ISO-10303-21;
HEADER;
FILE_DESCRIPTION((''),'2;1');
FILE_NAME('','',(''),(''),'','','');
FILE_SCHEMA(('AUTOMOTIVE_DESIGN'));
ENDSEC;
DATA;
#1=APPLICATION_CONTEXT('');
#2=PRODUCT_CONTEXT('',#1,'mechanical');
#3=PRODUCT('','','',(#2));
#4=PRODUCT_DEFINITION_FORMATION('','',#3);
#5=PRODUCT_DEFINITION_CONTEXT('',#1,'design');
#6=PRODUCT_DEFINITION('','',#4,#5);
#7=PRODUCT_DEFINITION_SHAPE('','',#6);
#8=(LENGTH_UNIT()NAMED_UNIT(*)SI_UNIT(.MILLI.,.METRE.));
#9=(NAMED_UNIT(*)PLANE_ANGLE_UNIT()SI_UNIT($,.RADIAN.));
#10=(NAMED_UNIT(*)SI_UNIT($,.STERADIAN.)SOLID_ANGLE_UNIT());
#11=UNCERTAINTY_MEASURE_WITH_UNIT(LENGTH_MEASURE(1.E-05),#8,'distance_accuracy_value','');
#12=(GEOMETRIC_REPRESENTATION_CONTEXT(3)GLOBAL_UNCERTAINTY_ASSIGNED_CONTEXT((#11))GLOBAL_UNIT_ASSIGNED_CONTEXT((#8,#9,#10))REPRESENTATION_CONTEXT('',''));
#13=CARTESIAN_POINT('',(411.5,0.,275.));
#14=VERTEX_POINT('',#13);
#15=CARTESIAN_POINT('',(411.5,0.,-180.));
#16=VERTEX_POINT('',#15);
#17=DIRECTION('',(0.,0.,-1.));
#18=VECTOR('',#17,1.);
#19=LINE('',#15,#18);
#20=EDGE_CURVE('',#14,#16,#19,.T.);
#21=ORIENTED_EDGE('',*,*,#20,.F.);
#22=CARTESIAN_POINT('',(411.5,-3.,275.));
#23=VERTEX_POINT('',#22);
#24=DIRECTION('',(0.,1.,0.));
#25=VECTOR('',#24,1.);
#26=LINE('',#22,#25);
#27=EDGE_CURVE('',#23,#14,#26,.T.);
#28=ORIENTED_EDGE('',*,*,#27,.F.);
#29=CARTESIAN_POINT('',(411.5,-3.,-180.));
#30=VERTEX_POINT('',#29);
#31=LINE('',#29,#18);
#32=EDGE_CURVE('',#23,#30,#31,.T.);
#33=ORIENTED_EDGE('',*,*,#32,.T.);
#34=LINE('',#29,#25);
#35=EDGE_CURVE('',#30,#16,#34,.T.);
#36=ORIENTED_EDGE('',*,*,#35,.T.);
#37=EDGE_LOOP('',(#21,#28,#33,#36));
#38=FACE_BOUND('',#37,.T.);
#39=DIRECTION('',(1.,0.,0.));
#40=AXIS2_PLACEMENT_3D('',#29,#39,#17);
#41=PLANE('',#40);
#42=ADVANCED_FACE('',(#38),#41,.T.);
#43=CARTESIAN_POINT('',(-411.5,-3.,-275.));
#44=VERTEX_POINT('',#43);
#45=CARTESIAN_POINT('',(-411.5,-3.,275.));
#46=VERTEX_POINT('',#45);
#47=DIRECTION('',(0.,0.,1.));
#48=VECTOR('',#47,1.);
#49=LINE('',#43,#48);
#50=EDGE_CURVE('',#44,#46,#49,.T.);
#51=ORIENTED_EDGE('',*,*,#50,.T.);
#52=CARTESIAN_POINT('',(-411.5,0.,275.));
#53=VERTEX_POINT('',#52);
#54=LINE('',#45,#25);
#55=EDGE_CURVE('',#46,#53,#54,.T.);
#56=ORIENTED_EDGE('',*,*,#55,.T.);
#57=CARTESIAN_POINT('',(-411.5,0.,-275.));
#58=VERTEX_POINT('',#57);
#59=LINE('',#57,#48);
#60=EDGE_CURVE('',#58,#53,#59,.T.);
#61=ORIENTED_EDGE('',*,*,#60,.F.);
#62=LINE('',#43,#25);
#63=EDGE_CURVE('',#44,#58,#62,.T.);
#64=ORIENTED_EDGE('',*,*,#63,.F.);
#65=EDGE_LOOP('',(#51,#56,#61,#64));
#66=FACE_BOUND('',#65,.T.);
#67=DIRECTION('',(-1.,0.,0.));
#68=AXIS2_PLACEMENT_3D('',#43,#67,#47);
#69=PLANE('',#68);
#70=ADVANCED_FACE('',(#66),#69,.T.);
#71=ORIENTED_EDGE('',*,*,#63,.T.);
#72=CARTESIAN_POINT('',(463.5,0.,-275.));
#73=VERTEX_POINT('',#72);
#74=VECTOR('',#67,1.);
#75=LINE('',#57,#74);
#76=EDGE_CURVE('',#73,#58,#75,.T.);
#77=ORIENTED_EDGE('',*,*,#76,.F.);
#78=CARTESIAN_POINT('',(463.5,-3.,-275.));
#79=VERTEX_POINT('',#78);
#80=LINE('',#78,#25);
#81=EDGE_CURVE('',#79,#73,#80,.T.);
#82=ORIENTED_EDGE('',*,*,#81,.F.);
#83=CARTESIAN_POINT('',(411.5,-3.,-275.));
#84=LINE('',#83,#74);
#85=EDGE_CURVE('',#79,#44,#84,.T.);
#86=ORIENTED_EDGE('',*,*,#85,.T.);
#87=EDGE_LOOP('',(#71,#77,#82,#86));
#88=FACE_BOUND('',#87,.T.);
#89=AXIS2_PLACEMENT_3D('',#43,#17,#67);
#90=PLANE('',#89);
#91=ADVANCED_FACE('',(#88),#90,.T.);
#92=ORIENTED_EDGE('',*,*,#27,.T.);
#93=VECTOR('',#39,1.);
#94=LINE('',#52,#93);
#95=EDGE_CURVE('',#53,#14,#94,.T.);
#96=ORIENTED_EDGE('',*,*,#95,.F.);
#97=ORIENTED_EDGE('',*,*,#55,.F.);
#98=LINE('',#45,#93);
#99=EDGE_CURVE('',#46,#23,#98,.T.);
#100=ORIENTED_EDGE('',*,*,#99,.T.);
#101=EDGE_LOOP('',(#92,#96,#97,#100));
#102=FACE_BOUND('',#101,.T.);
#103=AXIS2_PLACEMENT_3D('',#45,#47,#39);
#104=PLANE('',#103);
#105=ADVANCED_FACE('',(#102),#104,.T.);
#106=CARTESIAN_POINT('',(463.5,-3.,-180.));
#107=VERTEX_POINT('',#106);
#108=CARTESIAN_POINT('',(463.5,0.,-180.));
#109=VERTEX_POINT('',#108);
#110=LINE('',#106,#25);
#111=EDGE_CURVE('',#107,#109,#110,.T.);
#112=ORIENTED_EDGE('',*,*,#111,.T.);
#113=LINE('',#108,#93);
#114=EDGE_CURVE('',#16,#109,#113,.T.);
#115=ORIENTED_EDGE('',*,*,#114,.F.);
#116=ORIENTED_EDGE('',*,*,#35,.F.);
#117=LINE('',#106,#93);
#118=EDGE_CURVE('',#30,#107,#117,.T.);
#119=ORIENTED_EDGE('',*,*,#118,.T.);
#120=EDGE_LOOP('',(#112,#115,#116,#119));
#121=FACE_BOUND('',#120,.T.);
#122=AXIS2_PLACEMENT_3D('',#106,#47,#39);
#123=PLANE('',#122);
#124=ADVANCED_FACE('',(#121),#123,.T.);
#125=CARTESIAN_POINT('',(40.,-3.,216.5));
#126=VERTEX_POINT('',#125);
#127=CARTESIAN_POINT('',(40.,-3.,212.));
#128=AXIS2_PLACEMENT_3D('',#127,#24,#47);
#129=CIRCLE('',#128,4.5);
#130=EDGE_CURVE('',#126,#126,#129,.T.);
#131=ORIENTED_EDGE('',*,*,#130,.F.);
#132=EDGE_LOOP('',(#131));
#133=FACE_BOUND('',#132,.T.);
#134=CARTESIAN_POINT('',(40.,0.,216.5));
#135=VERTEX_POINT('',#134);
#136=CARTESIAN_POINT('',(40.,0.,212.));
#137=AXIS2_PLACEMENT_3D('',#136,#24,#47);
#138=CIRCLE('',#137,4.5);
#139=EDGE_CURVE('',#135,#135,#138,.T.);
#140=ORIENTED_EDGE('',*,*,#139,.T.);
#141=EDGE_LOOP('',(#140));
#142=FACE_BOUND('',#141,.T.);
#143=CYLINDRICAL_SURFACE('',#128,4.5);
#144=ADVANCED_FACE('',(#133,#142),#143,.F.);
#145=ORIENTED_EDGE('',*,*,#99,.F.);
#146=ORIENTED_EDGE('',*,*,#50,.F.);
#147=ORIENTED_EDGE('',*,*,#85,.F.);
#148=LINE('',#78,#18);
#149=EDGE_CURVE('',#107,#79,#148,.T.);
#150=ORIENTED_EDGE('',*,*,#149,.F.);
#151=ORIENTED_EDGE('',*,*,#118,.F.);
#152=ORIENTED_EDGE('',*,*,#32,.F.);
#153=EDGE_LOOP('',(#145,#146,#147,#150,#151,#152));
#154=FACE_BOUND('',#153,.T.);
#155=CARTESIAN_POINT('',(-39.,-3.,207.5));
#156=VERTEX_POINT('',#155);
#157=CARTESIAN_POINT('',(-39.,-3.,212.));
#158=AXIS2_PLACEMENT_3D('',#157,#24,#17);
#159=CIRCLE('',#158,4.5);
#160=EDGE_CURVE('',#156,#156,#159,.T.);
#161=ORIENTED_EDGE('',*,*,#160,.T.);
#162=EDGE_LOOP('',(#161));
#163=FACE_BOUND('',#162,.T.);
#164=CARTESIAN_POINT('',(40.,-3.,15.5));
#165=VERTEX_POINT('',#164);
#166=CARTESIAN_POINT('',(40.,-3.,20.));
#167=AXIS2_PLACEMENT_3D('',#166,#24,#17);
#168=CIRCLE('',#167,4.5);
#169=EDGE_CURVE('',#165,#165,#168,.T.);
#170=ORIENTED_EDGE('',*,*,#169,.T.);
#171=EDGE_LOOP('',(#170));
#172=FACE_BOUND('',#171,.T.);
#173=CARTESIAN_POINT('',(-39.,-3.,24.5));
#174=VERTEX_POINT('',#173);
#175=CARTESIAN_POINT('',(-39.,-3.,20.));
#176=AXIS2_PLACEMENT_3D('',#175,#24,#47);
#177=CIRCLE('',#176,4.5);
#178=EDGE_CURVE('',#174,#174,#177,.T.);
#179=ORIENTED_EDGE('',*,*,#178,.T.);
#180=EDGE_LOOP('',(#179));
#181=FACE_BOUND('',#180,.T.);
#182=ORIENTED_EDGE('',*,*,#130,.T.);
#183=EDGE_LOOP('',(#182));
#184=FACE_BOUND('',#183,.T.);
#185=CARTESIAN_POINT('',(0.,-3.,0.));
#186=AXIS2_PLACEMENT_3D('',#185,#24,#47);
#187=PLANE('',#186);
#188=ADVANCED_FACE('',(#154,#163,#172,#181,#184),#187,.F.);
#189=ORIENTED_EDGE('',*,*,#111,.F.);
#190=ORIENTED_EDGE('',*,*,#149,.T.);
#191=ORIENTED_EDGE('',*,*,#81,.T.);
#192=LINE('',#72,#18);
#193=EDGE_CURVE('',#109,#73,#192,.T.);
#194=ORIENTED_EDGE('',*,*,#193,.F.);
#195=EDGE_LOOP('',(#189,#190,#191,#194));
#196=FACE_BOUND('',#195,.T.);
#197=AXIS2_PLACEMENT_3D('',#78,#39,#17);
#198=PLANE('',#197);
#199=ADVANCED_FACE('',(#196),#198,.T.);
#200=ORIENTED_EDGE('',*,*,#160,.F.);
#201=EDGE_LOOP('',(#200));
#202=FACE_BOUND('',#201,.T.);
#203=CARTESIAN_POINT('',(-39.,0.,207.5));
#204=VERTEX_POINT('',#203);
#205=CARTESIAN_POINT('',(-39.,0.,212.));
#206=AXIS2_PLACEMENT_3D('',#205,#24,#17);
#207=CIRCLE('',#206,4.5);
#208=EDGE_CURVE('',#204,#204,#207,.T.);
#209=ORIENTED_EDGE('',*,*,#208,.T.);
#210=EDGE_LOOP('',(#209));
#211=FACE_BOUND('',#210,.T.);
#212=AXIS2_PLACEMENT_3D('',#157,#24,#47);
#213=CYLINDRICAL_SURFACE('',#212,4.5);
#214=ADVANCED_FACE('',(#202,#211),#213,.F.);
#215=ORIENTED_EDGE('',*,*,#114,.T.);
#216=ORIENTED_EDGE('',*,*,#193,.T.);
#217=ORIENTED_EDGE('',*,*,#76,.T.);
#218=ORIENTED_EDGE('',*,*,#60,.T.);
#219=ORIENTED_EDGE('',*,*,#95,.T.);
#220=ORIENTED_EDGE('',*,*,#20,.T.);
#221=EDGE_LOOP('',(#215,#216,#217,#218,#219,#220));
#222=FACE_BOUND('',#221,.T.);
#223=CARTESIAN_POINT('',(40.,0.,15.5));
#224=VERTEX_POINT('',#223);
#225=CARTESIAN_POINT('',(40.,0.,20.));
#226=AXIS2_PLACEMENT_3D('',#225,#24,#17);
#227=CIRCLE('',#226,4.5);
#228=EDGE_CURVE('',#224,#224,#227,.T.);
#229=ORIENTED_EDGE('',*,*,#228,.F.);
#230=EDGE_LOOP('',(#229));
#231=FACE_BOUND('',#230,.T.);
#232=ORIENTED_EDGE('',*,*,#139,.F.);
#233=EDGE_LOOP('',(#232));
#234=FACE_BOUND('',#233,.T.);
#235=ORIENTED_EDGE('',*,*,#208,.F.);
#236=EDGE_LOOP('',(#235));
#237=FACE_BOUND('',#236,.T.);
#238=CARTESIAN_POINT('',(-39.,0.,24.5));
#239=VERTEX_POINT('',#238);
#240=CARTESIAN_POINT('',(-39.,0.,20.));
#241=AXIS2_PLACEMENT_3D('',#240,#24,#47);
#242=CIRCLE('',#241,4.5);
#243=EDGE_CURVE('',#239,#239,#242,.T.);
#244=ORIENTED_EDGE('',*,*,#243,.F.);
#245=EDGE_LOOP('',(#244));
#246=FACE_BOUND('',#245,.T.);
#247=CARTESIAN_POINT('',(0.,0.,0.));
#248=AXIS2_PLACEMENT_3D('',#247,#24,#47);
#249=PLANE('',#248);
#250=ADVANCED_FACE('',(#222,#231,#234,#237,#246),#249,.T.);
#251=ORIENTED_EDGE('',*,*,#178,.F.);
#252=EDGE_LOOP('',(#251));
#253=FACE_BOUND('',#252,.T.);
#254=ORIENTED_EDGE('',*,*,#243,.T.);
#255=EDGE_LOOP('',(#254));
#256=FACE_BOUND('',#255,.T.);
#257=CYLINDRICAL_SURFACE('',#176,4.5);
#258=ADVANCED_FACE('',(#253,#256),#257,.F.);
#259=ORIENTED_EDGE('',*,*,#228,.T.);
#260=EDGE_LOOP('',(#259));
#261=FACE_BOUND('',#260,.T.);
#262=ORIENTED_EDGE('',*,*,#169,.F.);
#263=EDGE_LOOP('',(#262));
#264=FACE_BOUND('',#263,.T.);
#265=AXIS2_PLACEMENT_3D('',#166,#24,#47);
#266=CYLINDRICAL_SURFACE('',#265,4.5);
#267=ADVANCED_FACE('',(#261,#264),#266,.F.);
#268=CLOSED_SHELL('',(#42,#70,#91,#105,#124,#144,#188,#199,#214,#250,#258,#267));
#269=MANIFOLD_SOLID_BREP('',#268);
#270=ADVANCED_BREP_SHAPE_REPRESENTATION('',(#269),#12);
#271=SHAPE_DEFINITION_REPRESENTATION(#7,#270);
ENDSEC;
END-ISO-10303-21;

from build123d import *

# Parameters (mm, degrees)
SKETCH1_R          = 4.5
BASE_FLANGE1_DEPTH = 3


# Sheet-metal steps are written as plain solids
with BuildPart() as part:
    # Sketch1 → Base-Flange1 (new body)
    with BuildSketch(Plane(origin=(0, 0, 0), x_dir=(1, 0, 0), z_dir=(0, 1, 0))):
        Polygon((411.5, 275), (463.5, 275), (463.5, 180), (411.5, 180), (411.5, -275), (-411.5, -275), (-411.5, 275), align=None)
        with Locations(Location((-39, -212, 0), (0, 0, 90))):
            Circle(SKETCH1_R, mode=Mode.SUBTRACT)
        with Locations(Location((-39, -20, 0), (0, 0, 270))):
            Circle(SKETCH1_R, mode=Mode.SUBTRACT)
        with Locations(Location((40, -20, 0), (0, 0, 90))):
            Circle(SKETCH1_R, mode=Mode.SUBTRACT)
        with Locations(Location((40, -212, 0), (0, 0, 270))):
            Circle(SKETCH1_R, mode=Mode.SUBTRACT)
    extrude(amount=-BASE_FLANGE1_DEPTH)


solid = part.part
